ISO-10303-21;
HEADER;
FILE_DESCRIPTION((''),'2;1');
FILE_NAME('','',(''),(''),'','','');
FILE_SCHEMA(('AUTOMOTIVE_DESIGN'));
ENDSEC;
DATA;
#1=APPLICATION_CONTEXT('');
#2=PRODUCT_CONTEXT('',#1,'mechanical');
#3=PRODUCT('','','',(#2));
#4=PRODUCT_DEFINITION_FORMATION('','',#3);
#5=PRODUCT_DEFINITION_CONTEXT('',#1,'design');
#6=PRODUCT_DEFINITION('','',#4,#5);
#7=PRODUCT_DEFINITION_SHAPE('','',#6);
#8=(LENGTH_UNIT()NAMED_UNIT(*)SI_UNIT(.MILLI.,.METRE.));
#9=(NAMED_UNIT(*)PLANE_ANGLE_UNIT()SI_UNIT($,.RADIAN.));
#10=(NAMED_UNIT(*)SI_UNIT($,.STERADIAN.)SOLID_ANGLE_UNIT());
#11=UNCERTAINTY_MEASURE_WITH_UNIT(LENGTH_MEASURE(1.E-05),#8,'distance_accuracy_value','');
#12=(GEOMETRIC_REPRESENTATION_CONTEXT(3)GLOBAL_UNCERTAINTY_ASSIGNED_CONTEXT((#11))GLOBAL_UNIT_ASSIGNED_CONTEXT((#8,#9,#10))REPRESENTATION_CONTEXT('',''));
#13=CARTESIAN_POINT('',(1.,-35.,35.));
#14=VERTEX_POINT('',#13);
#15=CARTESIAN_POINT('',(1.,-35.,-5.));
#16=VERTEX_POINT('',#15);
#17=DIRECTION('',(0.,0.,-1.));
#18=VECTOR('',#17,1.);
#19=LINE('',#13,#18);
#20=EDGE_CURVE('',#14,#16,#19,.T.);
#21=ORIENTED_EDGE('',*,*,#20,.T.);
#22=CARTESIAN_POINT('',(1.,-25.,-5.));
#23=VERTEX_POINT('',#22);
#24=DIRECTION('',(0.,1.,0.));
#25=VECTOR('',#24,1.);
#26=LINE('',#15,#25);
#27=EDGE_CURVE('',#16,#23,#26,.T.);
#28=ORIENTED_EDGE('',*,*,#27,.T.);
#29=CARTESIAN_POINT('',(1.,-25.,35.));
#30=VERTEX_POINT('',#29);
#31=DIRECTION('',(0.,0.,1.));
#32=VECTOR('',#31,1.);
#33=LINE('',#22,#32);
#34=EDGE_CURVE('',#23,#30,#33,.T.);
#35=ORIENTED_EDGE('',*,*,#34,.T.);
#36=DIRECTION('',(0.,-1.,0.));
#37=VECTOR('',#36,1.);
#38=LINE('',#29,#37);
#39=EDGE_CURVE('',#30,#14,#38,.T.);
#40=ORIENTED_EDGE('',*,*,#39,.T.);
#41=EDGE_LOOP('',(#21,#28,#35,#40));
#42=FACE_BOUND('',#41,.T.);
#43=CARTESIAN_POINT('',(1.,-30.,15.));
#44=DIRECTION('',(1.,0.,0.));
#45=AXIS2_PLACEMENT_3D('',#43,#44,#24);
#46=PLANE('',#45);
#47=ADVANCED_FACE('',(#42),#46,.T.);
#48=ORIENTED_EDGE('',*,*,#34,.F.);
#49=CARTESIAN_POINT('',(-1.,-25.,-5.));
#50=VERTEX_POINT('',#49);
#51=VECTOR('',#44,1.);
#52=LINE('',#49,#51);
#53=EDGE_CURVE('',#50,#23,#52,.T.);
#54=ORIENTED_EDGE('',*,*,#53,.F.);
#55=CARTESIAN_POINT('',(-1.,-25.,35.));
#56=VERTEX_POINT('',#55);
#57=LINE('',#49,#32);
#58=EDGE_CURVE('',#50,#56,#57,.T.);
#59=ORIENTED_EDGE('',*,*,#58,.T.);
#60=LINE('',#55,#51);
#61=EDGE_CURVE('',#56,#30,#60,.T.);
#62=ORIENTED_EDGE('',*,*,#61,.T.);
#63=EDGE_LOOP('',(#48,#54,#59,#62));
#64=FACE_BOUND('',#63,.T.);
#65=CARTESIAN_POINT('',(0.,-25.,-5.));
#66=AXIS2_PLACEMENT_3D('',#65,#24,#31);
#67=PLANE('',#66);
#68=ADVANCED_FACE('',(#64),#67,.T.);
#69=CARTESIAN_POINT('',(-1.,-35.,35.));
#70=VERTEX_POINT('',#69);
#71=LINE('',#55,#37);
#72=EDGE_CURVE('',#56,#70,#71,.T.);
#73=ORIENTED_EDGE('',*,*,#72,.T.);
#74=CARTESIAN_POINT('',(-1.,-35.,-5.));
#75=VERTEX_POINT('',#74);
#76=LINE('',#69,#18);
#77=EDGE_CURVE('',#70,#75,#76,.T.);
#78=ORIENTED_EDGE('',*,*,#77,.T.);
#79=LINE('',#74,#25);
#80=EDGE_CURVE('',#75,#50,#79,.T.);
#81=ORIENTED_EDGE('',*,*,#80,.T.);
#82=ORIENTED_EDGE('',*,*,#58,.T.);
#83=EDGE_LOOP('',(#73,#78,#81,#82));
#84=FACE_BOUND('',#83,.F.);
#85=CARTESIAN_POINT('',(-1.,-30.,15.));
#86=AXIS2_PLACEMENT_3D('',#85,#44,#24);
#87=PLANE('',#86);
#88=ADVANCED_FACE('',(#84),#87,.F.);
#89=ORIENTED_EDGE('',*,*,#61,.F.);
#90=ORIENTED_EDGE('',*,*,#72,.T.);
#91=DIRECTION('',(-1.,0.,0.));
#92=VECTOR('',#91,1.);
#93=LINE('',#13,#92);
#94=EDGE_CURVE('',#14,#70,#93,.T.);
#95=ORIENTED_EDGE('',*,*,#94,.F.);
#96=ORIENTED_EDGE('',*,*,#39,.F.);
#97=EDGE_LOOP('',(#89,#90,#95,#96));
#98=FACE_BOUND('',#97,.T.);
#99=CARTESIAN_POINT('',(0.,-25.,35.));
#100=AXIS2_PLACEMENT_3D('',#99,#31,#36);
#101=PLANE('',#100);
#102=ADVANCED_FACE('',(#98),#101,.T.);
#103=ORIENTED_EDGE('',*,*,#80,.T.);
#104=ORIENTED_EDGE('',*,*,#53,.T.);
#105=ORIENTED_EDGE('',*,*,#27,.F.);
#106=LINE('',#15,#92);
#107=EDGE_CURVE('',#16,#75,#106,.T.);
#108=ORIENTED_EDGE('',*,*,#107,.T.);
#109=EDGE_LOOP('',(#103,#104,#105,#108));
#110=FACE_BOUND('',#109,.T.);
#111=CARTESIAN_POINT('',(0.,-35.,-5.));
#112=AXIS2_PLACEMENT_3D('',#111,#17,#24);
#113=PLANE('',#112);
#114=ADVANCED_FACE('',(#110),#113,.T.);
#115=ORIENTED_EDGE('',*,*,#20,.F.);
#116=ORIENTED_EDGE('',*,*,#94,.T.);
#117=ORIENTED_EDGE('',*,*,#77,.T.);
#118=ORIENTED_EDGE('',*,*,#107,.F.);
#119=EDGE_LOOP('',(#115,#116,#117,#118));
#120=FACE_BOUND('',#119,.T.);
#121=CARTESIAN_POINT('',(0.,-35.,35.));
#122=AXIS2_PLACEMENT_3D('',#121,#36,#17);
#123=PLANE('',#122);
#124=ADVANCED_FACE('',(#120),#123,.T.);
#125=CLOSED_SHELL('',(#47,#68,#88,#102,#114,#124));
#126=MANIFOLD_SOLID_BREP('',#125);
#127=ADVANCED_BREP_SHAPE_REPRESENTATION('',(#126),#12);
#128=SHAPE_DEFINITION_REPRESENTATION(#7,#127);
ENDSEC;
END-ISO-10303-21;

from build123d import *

# Parameters (mm, degrees)
F1_DEPTH = 1


# Not quite as in the source:
# - a feature of the source that left no trace in its solid (it failed there, or was rolled back) is left out


with BuildPart() as f1:
    # F0 (on Right) → F1 (new body, symmetric)
    with BuildSketch(Plane.YZ):
        Polygon((-35, -5), (-25, -5), (-25, 0), (-25, 35), (-35, 35), align=None)
    extrude(amount=F1_DEPTH, both=True)


solid = f1.part
